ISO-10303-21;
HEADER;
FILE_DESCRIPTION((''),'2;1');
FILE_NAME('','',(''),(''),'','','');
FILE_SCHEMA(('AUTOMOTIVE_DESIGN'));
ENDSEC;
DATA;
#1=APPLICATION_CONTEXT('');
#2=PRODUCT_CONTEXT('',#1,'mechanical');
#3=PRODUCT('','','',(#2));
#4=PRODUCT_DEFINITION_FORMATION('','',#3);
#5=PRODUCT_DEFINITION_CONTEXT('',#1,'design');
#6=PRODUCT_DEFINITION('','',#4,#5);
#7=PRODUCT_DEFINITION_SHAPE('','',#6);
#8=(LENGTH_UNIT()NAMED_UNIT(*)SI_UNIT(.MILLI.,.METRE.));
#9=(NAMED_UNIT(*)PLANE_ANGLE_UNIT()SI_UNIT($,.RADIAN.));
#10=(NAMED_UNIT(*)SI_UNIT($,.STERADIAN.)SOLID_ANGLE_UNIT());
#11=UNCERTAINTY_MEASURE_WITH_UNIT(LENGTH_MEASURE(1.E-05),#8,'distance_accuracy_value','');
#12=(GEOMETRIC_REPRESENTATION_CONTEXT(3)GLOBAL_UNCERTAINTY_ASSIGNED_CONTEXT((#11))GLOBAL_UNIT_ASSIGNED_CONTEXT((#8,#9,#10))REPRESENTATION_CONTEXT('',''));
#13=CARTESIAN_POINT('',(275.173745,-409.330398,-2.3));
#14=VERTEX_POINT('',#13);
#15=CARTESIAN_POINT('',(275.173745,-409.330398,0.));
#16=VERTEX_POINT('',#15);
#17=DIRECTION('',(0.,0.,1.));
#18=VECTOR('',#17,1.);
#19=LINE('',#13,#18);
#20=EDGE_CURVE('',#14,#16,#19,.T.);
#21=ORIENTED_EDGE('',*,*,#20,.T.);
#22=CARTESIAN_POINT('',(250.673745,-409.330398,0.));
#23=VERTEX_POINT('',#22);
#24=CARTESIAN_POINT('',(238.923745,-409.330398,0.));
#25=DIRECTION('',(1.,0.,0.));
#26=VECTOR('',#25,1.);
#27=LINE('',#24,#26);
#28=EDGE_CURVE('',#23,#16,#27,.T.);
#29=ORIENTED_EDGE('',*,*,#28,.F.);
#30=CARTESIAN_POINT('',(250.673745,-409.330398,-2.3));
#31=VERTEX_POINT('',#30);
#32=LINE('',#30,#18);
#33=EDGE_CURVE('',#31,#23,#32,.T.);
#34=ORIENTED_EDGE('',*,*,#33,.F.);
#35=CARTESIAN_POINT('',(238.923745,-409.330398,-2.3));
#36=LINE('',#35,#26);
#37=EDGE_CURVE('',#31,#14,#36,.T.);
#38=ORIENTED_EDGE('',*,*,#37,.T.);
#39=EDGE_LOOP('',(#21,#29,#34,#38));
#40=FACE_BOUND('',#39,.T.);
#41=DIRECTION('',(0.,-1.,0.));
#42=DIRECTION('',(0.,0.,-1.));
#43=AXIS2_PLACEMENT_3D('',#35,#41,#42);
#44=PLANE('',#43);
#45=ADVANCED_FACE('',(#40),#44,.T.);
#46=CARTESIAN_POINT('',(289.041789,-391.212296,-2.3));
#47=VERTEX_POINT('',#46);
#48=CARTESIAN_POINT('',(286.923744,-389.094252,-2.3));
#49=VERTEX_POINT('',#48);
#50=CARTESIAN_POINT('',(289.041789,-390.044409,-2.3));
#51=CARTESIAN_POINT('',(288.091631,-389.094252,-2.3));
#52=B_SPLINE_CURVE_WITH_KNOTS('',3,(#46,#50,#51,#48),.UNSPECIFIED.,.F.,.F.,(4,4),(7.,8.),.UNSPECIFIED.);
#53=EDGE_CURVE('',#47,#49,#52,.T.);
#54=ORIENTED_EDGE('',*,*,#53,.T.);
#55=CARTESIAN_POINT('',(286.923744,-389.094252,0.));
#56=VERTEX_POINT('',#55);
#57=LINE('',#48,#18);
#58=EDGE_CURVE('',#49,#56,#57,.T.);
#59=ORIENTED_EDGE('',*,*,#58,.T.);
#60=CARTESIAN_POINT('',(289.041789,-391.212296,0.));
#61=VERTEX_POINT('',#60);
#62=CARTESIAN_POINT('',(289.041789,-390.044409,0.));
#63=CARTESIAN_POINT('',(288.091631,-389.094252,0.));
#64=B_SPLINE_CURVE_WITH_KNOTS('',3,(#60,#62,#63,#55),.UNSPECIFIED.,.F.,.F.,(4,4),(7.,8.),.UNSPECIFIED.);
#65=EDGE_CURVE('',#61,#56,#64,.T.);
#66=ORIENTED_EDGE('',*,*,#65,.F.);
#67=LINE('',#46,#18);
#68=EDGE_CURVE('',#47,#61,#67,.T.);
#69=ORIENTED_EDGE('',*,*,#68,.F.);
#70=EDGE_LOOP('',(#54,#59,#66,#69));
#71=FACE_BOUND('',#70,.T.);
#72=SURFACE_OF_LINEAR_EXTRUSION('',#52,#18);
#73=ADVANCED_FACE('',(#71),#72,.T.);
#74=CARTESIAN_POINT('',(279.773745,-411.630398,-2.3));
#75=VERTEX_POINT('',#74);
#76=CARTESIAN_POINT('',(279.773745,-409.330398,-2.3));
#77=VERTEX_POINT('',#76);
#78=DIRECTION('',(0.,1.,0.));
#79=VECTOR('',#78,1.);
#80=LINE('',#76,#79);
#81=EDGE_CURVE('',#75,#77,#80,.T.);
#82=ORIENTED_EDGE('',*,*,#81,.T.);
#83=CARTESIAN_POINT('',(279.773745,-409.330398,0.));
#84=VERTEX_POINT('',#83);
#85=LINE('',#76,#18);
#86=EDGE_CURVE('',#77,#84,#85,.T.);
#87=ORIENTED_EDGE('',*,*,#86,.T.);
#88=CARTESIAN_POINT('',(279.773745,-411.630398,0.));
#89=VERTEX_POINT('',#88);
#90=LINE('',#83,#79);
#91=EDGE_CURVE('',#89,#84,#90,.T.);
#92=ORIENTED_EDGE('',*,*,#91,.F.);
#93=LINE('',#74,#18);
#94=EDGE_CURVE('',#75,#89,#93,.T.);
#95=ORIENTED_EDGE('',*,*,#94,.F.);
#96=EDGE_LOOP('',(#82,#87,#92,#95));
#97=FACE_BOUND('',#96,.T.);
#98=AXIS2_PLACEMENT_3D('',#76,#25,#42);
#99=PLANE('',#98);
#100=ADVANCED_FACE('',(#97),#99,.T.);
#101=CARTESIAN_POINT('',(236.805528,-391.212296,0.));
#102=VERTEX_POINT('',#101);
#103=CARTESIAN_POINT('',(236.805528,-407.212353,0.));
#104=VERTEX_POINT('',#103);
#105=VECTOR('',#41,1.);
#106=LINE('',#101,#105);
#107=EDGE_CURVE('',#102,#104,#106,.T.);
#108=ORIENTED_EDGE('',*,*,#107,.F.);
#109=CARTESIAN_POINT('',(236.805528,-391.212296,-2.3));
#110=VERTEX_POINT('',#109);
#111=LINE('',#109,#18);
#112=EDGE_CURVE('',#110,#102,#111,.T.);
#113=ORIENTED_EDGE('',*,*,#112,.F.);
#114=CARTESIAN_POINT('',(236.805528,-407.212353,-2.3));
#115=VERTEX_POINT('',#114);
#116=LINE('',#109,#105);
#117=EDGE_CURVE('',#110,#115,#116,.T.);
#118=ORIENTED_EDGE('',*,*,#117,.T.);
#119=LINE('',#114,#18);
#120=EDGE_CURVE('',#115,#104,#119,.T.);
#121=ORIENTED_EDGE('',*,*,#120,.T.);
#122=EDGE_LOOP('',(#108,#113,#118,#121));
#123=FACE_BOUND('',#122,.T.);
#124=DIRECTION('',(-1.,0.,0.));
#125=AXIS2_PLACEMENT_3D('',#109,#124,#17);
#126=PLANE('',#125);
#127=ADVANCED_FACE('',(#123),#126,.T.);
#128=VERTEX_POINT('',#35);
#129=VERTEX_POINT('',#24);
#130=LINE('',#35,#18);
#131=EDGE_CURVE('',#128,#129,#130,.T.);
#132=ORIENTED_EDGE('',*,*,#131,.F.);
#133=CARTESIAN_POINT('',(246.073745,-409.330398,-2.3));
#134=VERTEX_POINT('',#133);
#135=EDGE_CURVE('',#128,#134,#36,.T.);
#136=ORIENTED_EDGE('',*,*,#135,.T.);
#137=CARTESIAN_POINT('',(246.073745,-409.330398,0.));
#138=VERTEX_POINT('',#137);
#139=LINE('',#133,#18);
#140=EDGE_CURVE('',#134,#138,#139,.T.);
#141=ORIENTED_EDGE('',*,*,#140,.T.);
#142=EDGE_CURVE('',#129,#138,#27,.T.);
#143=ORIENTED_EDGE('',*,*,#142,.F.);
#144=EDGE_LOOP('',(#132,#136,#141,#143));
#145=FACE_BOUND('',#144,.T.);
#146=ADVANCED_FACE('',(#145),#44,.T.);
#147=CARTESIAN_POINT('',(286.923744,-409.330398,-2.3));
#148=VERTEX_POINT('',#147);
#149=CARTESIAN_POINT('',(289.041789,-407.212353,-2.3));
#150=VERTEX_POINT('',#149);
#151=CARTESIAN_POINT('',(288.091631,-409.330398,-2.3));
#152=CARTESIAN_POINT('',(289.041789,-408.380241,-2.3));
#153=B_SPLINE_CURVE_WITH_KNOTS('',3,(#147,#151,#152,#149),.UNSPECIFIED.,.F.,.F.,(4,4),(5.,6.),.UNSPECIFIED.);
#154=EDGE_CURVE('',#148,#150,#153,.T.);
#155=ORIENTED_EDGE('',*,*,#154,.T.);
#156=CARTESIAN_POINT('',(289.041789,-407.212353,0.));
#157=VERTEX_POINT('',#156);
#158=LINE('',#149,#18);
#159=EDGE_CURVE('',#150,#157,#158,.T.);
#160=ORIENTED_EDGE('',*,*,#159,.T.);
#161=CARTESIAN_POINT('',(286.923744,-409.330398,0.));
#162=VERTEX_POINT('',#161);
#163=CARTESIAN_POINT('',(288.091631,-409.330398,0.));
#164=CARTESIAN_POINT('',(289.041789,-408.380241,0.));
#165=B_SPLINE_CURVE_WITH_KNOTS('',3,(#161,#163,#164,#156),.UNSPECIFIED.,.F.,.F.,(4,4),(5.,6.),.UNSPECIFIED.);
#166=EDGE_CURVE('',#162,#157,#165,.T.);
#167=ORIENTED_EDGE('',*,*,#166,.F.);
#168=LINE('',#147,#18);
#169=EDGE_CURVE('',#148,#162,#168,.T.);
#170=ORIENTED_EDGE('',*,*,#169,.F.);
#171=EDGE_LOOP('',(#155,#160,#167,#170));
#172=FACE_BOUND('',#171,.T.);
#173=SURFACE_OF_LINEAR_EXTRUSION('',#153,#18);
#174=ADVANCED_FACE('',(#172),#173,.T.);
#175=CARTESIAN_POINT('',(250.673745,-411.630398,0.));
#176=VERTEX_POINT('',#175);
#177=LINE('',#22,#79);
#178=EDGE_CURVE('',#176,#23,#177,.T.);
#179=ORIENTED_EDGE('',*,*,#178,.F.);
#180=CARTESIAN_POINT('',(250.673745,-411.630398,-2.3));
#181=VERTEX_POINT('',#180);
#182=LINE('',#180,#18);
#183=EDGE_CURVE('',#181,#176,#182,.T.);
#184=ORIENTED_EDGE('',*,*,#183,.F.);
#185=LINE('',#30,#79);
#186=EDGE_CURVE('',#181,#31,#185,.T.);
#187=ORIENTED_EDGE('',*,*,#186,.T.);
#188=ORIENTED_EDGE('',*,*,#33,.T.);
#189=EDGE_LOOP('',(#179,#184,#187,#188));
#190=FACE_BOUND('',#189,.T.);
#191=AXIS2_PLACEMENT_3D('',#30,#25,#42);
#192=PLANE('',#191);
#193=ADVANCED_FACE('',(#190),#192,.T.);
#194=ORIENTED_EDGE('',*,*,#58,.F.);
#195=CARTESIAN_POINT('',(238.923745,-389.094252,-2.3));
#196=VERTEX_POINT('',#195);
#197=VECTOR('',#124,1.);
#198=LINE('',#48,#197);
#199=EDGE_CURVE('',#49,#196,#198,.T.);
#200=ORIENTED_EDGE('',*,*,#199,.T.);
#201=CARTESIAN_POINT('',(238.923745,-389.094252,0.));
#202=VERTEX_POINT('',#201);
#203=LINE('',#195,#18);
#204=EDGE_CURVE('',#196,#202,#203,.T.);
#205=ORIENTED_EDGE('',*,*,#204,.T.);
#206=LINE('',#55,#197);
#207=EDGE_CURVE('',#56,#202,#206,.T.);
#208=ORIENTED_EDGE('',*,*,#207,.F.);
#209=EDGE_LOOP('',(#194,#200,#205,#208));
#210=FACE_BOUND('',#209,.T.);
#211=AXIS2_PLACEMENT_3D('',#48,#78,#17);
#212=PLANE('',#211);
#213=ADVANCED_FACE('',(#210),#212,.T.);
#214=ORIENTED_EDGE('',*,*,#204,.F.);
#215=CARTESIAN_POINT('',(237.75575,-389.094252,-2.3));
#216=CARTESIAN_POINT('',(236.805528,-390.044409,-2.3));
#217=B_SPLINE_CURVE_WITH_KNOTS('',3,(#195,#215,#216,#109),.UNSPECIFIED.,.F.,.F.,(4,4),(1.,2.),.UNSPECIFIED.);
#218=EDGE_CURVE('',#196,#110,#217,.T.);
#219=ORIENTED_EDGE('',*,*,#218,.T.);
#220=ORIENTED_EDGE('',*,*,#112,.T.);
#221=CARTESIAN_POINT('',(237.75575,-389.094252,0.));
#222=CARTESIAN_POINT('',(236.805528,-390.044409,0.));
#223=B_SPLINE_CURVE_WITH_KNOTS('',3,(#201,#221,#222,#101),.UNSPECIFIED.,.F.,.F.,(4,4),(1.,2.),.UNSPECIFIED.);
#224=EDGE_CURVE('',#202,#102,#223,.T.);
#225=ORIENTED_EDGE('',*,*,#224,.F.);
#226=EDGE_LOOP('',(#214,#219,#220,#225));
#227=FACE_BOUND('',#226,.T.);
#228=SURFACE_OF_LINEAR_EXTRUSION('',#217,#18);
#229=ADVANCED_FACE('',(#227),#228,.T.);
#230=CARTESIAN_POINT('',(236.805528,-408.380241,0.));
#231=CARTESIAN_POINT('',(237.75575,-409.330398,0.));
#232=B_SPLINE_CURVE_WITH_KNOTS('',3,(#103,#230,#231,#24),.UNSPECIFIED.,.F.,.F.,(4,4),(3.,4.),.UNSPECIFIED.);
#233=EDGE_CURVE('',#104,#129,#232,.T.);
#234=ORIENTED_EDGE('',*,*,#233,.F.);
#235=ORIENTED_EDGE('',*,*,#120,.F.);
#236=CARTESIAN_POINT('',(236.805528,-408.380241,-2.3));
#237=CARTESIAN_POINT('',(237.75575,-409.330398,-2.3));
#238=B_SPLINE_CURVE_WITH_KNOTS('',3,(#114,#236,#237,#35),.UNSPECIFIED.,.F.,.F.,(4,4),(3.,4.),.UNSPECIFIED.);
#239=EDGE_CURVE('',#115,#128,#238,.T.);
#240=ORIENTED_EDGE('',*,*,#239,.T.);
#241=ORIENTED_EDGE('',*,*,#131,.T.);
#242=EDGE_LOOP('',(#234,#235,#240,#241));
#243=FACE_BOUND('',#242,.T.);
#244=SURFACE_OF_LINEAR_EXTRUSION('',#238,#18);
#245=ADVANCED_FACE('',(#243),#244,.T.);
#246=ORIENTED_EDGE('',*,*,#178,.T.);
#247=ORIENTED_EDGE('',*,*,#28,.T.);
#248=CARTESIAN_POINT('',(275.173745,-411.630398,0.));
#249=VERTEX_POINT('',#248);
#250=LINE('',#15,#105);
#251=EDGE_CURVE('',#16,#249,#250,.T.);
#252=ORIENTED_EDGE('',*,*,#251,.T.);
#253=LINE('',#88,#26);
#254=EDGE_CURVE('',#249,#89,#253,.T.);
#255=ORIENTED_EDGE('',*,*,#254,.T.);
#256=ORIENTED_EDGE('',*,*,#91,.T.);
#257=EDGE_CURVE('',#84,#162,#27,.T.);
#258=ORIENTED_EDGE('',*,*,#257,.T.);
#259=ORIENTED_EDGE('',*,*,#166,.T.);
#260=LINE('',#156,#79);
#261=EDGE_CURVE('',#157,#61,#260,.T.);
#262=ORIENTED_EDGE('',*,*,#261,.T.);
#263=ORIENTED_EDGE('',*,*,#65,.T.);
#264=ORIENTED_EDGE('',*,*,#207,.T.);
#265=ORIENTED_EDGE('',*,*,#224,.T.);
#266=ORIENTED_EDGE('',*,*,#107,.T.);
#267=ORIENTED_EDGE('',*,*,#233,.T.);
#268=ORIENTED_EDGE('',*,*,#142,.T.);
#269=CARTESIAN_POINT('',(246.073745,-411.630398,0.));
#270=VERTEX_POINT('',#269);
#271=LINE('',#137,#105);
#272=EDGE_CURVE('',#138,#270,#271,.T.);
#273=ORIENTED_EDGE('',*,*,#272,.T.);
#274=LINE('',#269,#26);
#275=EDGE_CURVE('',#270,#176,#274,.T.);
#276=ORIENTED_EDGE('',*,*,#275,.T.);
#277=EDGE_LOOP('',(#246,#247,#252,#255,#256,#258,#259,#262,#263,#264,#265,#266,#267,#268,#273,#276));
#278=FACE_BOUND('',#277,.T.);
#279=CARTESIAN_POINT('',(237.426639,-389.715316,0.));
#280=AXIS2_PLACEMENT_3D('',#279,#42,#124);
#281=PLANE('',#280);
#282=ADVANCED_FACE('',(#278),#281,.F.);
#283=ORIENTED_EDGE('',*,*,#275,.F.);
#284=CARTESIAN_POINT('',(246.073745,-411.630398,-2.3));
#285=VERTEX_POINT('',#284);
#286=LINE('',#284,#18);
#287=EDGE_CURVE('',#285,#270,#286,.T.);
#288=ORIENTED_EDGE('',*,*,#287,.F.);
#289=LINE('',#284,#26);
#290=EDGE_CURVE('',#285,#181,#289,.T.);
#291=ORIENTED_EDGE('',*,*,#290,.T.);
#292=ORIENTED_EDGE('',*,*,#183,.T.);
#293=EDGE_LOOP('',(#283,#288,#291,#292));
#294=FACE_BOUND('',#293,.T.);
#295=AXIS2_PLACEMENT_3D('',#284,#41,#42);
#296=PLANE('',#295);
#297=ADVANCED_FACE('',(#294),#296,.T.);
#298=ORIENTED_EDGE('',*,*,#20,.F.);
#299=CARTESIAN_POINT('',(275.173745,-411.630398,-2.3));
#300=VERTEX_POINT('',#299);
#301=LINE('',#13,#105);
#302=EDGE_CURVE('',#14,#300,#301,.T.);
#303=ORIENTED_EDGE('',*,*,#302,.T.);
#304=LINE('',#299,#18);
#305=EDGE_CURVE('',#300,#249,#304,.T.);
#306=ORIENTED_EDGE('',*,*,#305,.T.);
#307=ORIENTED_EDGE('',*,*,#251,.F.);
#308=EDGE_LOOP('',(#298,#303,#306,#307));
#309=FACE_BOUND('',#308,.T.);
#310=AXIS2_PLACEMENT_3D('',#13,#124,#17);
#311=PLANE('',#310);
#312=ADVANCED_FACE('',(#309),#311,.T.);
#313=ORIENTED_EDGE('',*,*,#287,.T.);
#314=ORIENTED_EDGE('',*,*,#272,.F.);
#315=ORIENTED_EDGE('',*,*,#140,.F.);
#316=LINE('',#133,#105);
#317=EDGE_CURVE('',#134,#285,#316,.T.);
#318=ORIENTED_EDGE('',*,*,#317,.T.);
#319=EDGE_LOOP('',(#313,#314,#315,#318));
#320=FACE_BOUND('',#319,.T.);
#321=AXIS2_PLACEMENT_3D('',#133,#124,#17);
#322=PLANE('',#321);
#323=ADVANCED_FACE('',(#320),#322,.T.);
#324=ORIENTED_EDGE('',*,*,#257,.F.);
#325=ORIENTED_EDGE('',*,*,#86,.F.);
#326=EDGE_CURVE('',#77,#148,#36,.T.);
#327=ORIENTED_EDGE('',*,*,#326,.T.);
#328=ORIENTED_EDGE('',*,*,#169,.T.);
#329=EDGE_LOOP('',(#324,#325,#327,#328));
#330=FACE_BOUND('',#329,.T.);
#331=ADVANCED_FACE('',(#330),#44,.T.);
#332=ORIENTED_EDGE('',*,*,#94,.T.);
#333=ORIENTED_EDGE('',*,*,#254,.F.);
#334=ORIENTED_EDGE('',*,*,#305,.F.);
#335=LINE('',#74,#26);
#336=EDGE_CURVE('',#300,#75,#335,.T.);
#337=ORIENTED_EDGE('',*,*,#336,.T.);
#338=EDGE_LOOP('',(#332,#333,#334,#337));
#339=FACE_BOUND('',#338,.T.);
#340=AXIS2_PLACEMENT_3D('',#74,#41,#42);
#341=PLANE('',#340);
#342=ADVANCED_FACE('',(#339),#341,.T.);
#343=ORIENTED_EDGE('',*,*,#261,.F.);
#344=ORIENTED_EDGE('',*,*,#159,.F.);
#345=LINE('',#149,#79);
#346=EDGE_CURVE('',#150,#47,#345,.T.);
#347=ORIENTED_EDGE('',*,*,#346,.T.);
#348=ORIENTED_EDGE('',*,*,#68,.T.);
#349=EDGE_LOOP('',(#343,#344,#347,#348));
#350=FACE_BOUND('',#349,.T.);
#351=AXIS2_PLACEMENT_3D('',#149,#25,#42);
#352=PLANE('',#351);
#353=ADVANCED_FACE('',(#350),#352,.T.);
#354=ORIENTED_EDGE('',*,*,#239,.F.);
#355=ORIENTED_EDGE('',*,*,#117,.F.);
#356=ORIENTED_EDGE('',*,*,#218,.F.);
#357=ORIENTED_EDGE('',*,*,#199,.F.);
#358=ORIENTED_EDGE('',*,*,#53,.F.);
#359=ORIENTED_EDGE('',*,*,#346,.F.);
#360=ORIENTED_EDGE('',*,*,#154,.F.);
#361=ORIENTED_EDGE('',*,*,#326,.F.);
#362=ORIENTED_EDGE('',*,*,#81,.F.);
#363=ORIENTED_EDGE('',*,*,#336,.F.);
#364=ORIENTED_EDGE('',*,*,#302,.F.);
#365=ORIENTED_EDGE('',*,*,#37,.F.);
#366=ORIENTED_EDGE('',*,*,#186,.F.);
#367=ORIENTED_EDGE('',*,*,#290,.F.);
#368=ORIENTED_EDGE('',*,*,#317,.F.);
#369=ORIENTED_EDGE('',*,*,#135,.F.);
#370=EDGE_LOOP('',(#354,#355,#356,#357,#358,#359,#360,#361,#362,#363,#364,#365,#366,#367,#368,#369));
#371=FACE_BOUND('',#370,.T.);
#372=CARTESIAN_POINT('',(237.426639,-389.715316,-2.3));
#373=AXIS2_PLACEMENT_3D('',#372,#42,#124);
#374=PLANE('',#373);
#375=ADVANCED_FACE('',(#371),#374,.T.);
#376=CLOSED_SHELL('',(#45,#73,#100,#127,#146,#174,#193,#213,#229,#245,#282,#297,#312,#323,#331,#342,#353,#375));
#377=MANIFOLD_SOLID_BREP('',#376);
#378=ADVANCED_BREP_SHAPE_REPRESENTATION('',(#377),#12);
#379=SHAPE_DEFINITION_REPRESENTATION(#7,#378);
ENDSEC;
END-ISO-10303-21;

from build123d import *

# Parameters (mm, degrees)
BASE_FLANGE1_DEPTH = 2.3
SKETCH6_W          = 4.6
SKETCH6_H          = 2.3
TAB1_DEPTH         = 2.3


# Sheet-metal steps are written as plain solids
with BuildPart() as part:
    # Model → Base-Flange1 (new body)
    with BuildSketch(Plane.XY):
        with BuildLine():
            Line((286.92374396, -389.094251747), (238.923745329, -389.094251747))
            add(Edge.make_bspline(
                [(238.923745329, -389.094251747), (237.7557503, -389.094251747), (236.80552837, -390.044409082), (236.80552837, -391.212296452)],
                knots=[1, 1, 1, 1, 2, 2, 2, 2], degree=3))
            Line((236.80552837, -391.212296452), (236.80552837, -407.212353414))
            add(Edge.make_bspline(
                [(236.80552837, -407.212353414), (236.80552837, -408.380240783), (237.7557503, -409.330398118), (238.923745329, -409.330398118)],
                knots=[3, 3, 3, 3, 4, 4, 4, 4], degree=3))
            Line((238.923745329, -409.330398118), (286.92374396, -409.330398118))
            add(Edge.make_bspline(
                [(286.92374396, -409.330398118), (288.09163133, -409.330398118), (289.041788665, -408.380240783), (289.041788665, -407.212353414)],
                knots=[5, 5, 5, 5, 6, 6, 6, 6], degree=3))
            Line((289.041788665, -407.212353414), (289.041788665, -391.212296452))
            add(Edge.make_bspline(
                [(289.041788665, -391.212296452), (289.041788665, -390.044409082), (288.09163133, -389.094251747), (286.92374396, -389.094251747)],
                knots=[7, 7, 7, 7, 8, 8, 8, 8], degree=3))
        make_face()
    extrude(amount=-BASE_FLANGE1_DEPTH)

    # Sketch6 → Tab1 (add)
    with BuildSketch(Plane.XY):
        with Locations((248.373744645, -410.480398118)):
            Rectangle(SKETCH6_W, SKETCH6_H)
        with Locations((277.473744645, -410.480398118)):
            Rectangle(SKETCH6_W, SKETCH6_H)
    extrude(amount=-TAB1_DEPTH)


solid = part.part
